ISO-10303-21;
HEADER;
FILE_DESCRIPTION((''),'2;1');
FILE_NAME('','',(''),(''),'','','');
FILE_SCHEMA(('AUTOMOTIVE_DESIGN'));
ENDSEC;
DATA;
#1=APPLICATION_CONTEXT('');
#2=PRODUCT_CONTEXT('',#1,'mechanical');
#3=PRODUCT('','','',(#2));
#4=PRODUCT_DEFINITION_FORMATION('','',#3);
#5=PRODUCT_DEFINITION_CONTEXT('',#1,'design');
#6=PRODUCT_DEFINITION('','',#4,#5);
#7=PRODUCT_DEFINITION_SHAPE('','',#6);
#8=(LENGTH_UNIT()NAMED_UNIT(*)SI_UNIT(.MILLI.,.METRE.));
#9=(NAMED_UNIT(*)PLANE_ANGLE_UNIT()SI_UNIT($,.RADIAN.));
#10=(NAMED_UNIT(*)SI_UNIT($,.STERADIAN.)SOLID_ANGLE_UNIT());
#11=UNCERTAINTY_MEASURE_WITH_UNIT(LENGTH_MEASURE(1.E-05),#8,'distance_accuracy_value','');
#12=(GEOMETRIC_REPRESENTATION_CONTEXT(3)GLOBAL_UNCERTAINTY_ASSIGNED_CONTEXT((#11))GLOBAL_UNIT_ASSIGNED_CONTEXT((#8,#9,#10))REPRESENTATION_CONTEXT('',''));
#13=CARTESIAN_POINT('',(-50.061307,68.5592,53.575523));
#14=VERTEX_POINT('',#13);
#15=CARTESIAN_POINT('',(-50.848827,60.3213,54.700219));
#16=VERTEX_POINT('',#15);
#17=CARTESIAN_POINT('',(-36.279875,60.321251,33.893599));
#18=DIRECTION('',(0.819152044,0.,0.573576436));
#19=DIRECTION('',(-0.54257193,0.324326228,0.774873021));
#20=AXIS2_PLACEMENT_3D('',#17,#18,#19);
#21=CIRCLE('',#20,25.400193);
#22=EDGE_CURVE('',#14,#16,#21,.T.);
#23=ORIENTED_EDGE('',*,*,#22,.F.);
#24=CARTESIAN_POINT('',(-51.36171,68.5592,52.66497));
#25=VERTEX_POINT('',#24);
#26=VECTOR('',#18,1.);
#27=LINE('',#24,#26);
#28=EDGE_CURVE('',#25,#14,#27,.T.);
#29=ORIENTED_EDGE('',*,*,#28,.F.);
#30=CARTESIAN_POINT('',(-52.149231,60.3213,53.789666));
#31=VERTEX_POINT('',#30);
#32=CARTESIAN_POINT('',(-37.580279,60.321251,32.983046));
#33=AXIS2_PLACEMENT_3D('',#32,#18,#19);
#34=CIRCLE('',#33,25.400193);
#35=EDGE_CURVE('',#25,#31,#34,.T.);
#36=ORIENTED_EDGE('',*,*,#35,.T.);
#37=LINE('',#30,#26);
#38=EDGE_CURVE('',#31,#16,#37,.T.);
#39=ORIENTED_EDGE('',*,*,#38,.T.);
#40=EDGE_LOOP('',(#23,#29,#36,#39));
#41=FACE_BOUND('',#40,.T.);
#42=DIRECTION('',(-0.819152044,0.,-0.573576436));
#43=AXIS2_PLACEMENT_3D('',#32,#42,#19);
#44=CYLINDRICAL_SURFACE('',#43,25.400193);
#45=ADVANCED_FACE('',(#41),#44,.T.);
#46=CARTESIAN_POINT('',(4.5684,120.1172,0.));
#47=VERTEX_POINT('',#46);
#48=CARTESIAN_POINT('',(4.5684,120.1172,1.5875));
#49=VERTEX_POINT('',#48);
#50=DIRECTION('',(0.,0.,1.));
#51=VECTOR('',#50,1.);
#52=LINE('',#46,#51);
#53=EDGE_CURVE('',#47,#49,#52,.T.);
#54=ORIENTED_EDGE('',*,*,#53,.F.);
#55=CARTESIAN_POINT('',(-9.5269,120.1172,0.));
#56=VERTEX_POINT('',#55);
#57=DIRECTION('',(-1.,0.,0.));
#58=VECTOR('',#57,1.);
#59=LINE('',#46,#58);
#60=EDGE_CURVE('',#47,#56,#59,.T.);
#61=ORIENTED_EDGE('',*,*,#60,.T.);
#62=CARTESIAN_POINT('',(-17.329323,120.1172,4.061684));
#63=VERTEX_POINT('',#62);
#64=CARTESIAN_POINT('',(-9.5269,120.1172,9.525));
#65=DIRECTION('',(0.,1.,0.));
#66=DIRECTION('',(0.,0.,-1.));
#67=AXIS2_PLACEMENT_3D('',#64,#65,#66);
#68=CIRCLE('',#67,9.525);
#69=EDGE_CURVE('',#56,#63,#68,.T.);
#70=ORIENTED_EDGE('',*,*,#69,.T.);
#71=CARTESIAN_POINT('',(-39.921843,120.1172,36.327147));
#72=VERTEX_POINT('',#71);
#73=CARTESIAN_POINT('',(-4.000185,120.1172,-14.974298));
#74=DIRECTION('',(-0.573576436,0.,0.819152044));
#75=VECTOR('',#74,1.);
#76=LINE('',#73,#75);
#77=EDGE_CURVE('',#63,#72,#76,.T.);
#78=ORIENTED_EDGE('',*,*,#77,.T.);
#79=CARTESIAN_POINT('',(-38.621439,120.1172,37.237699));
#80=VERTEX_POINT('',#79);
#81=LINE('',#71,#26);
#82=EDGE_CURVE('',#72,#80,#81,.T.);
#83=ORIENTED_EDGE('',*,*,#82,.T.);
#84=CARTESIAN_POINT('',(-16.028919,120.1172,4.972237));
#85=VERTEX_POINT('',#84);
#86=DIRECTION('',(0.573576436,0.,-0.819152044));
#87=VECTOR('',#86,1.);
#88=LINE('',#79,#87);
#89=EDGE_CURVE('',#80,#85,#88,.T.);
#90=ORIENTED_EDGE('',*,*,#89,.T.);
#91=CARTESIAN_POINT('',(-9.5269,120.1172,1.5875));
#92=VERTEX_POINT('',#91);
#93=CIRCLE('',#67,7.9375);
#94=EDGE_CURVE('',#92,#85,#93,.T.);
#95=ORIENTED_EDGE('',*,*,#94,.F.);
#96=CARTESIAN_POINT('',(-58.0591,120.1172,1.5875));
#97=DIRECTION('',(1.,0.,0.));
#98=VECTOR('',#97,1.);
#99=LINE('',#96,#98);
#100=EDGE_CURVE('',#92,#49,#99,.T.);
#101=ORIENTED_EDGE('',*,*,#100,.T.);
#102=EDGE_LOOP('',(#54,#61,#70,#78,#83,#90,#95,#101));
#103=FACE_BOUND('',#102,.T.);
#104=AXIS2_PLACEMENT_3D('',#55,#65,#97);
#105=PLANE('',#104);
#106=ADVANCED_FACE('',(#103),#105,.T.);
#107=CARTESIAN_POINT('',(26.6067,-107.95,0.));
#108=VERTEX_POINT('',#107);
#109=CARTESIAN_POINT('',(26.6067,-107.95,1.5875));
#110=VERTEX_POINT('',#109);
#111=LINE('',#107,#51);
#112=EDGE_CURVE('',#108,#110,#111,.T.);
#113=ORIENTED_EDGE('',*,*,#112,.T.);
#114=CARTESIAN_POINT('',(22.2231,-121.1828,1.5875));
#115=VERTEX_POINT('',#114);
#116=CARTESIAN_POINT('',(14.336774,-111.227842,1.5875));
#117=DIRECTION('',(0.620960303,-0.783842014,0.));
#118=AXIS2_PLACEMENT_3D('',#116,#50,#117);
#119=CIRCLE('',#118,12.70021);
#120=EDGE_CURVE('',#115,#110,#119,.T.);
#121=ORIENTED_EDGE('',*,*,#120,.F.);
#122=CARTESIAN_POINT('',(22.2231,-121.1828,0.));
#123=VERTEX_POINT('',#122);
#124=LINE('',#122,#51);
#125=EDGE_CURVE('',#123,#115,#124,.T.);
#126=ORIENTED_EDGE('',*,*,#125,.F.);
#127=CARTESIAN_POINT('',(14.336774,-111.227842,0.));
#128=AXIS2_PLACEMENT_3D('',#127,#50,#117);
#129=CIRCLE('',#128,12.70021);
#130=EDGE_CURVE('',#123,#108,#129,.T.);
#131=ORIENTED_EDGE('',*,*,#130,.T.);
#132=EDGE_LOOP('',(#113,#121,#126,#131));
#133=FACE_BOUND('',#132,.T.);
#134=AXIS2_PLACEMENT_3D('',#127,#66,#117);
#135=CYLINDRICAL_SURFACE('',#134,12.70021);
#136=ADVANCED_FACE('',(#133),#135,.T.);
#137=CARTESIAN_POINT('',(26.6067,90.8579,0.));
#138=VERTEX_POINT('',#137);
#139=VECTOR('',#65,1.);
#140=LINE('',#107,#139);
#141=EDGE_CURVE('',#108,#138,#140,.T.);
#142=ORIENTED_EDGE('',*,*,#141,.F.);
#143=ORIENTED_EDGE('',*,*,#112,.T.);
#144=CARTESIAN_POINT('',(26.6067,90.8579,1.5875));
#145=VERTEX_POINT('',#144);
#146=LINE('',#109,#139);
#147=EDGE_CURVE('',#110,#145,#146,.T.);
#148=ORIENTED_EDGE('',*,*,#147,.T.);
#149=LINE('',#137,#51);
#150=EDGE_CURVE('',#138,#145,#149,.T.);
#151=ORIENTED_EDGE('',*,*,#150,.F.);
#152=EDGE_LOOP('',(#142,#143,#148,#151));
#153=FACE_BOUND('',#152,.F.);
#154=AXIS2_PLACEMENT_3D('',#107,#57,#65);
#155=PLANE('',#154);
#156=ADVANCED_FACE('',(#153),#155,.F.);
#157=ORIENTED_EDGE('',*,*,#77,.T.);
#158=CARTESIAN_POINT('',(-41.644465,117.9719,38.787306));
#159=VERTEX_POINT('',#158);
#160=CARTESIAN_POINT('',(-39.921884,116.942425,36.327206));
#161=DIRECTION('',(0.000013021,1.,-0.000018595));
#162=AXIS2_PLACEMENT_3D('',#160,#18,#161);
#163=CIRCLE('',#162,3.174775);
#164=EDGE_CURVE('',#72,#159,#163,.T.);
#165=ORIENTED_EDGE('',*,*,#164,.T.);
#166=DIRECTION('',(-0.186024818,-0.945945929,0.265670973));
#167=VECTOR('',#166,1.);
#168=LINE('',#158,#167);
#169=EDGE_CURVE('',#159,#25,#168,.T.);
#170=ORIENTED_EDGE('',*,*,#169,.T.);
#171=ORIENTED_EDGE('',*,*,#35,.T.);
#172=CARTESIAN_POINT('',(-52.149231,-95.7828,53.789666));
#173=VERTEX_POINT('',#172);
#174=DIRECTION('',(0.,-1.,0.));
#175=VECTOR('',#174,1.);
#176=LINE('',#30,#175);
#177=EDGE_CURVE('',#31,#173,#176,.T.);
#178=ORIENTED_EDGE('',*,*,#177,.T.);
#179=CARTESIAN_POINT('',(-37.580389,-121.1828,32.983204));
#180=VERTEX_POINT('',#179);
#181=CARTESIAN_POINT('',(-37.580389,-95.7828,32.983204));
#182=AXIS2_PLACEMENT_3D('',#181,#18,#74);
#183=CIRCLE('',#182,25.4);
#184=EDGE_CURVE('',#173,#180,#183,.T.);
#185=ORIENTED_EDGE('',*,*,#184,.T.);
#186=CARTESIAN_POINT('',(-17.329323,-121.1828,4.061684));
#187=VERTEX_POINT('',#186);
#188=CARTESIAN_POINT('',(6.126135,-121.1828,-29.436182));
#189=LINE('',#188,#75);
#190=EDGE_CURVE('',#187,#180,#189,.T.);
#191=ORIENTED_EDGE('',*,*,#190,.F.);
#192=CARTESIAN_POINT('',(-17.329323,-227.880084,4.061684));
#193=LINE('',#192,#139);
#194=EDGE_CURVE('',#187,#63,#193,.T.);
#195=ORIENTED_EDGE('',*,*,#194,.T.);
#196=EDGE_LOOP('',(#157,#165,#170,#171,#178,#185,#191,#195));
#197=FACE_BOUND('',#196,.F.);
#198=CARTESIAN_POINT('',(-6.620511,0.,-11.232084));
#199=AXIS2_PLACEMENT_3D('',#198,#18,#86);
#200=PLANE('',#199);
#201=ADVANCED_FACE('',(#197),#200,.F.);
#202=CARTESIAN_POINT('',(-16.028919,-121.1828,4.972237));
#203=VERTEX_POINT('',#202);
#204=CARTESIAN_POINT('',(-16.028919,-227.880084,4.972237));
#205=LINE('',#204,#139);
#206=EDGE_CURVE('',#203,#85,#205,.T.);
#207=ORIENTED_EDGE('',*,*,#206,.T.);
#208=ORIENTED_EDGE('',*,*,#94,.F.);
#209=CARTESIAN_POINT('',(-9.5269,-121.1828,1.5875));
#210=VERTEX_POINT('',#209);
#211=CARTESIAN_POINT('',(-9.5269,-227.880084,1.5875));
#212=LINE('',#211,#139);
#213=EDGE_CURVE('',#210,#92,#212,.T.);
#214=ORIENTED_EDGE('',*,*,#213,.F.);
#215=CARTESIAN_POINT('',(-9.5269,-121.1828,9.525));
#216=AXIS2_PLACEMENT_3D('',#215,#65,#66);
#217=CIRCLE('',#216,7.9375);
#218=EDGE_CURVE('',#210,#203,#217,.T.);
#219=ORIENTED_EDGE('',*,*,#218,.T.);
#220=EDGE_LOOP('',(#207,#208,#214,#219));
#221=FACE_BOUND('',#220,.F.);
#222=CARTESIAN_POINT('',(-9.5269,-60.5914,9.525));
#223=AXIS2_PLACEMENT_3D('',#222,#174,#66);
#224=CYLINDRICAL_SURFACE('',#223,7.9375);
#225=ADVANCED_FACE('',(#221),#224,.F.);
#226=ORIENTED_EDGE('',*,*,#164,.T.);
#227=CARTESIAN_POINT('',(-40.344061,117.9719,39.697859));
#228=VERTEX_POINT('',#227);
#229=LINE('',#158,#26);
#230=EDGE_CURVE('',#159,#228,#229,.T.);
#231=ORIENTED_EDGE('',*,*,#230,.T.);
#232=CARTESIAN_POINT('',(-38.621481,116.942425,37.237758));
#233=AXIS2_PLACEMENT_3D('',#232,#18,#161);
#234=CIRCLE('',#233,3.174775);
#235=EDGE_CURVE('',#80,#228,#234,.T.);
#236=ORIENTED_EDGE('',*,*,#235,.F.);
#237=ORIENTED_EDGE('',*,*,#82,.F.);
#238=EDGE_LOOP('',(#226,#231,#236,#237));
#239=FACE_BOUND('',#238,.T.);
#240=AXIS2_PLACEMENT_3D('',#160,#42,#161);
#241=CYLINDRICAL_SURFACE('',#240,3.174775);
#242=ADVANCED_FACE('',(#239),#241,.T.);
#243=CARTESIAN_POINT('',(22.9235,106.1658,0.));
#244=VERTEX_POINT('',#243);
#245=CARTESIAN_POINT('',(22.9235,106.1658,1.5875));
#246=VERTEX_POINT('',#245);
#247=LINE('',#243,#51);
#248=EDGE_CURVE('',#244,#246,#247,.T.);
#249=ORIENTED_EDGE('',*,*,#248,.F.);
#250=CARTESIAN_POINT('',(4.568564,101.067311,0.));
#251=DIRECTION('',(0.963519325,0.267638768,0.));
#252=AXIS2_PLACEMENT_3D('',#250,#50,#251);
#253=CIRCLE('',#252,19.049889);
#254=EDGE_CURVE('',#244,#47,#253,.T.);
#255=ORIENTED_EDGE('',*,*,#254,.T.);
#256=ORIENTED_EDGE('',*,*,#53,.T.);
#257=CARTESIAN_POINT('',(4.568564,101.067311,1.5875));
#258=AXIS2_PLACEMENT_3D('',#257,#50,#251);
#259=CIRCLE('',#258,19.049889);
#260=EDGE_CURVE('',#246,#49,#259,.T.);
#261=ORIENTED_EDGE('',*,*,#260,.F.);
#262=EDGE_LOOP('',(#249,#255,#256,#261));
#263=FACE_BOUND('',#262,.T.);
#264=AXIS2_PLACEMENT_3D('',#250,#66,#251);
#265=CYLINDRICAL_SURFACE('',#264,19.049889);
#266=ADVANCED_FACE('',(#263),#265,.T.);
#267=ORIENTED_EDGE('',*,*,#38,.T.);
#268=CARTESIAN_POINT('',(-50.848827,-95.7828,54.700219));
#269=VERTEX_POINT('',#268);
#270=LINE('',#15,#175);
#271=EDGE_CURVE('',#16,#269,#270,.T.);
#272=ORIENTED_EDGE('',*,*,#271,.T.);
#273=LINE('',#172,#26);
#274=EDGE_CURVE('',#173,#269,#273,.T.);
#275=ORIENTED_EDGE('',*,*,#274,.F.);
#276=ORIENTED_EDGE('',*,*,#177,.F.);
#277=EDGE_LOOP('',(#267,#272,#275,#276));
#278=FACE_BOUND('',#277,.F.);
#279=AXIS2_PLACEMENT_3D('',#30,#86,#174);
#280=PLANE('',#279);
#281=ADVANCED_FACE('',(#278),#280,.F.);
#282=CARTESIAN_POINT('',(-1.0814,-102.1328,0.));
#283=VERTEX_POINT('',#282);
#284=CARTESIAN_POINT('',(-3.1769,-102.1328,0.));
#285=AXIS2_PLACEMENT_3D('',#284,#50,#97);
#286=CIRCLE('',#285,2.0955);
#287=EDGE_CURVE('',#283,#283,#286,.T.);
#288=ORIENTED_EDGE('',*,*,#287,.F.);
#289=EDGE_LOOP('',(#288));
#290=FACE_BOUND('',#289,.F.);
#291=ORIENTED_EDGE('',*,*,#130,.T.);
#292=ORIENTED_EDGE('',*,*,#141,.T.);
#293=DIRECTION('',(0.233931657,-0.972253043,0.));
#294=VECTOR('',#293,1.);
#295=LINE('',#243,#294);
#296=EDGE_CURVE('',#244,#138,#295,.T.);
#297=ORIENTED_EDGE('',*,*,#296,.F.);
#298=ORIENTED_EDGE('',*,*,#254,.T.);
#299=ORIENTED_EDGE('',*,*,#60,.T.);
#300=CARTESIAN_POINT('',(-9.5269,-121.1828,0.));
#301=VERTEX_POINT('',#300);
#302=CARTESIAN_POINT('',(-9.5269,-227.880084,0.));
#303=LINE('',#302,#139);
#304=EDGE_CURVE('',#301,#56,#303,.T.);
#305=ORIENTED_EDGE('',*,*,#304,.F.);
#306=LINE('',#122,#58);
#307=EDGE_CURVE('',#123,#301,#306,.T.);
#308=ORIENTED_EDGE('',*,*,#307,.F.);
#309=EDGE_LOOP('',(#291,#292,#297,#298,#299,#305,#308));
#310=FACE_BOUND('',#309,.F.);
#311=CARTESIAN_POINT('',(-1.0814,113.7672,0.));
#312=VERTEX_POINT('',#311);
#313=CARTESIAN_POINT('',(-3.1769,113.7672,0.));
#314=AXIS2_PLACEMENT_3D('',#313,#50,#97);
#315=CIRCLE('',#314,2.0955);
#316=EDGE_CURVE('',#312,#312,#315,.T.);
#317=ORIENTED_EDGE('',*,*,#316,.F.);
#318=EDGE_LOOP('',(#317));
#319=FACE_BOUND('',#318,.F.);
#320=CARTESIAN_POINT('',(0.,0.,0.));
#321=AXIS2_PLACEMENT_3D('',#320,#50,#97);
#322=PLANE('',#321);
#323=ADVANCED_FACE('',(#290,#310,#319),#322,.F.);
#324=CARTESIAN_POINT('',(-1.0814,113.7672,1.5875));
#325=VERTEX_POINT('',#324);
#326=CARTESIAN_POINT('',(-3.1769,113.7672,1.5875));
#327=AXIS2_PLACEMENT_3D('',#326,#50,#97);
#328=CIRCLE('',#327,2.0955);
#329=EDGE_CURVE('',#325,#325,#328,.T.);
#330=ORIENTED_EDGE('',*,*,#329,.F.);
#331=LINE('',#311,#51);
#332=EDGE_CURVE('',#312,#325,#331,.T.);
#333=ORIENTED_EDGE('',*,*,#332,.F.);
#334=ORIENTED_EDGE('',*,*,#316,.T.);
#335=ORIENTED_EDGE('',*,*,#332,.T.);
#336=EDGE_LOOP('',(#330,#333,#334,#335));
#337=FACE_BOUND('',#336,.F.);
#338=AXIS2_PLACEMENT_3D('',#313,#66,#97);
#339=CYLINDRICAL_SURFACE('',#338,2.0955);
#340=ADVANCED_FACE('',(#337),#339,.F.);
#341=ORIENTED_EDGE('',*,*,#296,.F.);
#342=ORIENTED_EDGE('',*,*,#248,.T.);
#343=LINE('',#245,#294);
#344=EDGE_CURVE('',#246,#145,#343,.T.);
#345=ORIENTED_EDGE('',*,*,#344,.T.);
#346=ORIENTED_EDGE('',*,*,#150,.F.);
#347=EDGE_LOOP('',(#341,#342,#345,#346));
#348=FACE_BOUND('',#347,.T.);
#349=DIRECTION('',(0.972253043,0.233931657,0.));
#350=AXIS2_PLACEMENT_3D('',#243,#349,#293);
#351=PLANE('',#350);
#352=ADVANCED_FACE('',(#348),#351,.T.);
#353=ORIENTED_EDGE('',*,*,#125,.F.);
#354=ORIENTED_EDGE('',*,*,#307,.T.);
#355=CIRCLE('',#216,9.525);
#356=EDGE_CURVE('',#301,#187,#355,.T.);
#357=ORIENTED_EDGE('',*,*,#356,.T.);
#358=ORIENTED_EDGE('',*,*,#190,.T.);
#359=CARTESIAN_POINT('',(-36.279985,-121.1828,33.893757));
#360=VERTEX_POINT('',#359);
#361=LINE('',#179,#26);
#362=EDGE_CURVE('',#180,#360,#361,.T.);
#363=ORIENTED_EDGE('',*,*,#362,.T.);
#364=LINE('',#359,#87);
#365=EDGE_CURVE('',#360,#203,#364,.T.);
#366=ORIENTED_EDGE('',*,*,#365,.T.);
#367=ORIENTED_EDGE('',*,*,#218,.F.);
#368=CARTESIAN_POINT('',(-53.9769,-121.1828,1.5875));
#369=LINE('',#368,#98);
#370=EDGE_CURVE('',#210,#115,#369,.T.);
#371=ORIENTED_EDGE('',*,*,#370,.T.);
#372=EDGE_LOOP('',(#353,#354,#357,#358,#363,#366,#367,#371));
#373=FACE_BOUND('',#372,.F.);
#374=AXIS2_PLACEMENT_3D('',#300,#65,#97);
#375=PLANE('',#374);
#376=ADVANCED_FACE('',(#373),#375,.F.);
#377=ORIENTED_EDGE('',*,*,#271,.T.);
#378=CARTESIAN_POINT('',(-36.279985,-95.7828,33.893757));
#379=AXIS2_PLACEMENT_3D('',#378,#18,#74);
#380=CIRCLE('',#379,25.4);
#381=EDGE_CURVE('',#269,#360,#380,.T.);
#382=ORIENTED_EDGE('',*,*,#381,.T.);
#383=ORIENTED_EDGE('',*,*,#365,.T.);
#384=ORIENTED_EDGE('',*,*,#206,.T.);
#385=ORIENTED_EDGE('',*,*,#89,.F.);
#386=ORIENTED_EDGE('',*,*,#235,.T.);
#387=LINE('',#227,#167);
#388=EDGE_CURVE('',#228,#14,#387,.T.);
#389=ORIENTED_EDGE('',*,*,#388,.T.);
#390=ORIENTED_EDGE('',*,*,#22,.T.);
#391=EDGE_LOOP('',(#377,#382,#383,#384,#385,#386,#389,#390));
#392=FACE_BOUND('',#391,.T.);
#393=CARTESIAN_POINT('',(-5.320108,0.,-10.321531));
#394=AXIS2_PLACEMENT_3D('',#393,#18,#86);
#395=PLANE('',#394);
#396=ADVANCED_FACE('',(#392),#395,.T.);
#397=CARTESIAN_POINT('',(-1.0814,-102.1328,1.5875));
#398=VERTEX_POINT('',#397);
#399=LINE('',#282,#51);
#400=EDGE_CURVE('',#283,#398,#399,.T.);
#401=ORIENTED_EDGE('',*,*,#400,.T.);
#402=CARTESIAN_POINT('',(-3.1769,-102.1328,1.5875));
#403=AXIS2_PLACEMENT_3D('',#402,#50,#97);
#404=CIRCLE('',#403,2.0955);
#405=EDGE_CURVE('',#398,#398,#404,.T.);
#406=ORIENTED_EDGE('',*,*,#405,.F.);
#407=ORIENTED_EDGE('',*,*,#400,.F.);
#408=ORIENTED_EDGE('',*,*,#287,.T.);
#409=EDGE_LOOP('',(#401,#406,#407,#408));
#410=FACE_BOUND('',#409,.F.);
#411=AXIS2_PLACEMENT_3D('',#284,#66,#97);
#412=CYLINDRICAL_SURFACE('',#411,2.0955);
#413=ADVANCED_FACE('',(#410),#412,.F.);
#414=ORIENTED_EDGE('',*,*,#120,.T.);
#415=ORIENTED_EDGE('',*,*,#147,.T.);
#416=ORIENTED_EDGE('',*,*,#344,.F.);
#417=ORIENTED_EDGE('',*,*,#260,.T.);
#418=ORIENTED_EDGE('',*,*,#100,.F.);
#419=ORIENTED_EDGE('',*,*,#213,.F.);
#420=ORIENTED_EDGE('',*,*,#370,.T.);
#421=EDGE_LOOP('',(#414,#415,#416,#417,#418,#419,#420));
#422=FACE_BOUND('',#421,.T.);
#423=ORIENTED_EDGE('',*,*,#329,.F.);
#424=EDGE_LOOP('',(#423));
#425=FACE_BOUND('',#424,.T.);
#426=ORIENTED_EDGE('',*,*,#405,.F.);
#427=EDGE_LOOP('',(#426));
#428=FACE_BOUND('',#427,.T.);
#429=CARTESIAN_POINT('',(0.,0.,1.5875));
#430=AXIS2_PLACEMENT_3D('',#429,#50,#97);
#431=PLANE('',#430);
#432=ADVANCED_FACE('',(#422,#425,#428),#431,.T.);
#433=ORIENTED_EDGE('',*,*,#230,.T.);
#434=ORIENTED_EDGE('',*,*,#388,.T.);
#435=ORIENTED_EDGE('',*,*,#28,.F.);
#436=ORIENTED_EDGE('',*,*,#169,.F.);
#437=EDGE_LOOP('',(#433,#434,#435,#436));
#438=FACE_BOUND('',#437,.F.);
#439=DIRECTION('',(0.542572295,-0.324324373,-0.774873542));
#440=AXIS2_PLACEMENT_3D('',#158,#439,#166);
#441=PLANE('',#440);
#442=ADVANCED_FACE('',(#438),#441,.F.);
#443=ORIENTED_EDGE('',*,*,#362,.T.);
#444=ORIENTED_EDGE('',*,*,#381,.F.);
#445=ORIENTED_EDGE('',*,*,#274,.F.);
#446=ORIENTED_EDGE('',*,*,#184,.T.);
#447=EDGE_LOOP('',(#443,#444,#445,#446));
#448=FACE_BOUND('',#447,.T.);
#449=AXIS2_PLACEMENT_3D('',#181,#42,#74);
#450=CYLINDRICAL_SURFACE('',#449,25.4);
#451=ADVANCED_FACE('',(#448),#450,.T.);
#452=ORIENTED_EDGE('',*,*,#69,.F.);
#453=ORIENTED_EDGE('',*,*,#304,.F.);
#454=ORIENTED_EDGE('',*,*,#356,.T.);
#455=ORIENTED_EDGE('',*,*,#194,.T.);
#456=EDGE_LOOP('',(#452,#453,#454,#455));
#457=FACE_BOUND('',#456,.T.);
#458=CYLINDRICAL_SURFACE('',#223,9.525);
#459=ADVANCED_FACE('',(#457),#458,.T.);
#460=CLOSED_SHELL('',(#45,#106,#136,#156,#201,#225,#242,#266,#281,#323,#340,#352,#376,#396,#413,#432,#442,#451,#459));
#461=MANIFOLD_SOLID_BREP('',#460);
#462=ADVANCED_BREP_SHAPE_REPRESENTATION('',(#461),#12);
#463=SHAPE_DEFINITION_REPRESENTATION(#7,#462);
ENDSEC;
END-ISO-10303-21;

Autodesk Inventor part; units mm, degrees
ref_plane "YZ Plane" through (0, 0, 0) normal (1, 0, 0) x (0, 1, 0)
ref_plane "XZ Plane" through (0, 0, 0) normal (0, 1, 0) x (-1, 0, 0)
ref_plane "XY Plane" through (0, 0, 0) normal (0, 0, 1) x (1, 0, 0)
sketch "Sketch1" plane through (0, 0, 0) normal (0, 0, 1) x (1, 0, 0)
  circle A0 centre (-3.1769, 113.7672) radius 2.0955
  circle A1 centre (-3.1769, -102.1328) radius 2.0955
  line L0 (-9.5269, 120.1172) -> (4.5684, 120.1172)
  line L1 (-9.5269, -121.1828) -> (-9.5269, 120.1172)
  line L2 (-9.5269, 120.1172) -> (-58.0591, 120.1172)
  line L3 (-79.3769, 60.3213) -> (-79.3769, -95.7828)
  line L4 (-9.5269, -121.1828) -> (-9.5269, 120.1172)
  line L5 (-61.0624, 117.9719) -> (-78.0039, 68.5592)
  arc A2 (-78.0039, 68.5592) -> (-79.3769, 60.3213) centre (-53.9769, 60.3213) ccw
  arc A3 (-79.3769, -95.7828) -> (-53.9769, -121.1828) centre (-53.9769, -95.7828) ccw
  arc A4 (-58.0591, 120.1172) -> (-61.0624, 117.9719) centre (-58.0591, 116.9422) ccw
  arc A5 (22.9235, 106.1658) -> (4.5684, 120.1172) centre (4.5684, 101.0672) ccw
  arc A6 (22.2231, -121.1828) -> (26.6067, -107.95) centre (14.337, -111.228) ccw
  line L6 (-41.2769, -121.1828) -> (22.2231, -121.1828)
  line L7 (26.6067, -107.95) -> (26.6067, 90.8579)
  line L8 (22.9235, 106.1658) -> (26.6067, 90.8579)
  line L9 (-53.9769, -121.1828) -> (-41.2769, -121.1828)
  point P0 (0, 0)
  point P1 (-79.3769, -121.1828)
  dimension "d0" = 4.191
  dimension "d1" = 4.191
  dimension "d2" = 69.85
  dimension "d3" = 25.4
  dimension "d4" = 3.175
  dimension "d5" = 19.05
  dimension "d16" = 12.7
  dimension "d18" = 63.5
extrude "Extrusion1" add sketch "Sketch1" along normal blind 1.5875
bend part "Bend Part1" radius 9.525 angle 55 line through (-9.5269, -121.1828, 0) along (0, 1, 0) centre toward (0, 0, 1) moving side (-1, 0, 0) both sides no
properties part number "wedge" material "Acetal Resin, White"
